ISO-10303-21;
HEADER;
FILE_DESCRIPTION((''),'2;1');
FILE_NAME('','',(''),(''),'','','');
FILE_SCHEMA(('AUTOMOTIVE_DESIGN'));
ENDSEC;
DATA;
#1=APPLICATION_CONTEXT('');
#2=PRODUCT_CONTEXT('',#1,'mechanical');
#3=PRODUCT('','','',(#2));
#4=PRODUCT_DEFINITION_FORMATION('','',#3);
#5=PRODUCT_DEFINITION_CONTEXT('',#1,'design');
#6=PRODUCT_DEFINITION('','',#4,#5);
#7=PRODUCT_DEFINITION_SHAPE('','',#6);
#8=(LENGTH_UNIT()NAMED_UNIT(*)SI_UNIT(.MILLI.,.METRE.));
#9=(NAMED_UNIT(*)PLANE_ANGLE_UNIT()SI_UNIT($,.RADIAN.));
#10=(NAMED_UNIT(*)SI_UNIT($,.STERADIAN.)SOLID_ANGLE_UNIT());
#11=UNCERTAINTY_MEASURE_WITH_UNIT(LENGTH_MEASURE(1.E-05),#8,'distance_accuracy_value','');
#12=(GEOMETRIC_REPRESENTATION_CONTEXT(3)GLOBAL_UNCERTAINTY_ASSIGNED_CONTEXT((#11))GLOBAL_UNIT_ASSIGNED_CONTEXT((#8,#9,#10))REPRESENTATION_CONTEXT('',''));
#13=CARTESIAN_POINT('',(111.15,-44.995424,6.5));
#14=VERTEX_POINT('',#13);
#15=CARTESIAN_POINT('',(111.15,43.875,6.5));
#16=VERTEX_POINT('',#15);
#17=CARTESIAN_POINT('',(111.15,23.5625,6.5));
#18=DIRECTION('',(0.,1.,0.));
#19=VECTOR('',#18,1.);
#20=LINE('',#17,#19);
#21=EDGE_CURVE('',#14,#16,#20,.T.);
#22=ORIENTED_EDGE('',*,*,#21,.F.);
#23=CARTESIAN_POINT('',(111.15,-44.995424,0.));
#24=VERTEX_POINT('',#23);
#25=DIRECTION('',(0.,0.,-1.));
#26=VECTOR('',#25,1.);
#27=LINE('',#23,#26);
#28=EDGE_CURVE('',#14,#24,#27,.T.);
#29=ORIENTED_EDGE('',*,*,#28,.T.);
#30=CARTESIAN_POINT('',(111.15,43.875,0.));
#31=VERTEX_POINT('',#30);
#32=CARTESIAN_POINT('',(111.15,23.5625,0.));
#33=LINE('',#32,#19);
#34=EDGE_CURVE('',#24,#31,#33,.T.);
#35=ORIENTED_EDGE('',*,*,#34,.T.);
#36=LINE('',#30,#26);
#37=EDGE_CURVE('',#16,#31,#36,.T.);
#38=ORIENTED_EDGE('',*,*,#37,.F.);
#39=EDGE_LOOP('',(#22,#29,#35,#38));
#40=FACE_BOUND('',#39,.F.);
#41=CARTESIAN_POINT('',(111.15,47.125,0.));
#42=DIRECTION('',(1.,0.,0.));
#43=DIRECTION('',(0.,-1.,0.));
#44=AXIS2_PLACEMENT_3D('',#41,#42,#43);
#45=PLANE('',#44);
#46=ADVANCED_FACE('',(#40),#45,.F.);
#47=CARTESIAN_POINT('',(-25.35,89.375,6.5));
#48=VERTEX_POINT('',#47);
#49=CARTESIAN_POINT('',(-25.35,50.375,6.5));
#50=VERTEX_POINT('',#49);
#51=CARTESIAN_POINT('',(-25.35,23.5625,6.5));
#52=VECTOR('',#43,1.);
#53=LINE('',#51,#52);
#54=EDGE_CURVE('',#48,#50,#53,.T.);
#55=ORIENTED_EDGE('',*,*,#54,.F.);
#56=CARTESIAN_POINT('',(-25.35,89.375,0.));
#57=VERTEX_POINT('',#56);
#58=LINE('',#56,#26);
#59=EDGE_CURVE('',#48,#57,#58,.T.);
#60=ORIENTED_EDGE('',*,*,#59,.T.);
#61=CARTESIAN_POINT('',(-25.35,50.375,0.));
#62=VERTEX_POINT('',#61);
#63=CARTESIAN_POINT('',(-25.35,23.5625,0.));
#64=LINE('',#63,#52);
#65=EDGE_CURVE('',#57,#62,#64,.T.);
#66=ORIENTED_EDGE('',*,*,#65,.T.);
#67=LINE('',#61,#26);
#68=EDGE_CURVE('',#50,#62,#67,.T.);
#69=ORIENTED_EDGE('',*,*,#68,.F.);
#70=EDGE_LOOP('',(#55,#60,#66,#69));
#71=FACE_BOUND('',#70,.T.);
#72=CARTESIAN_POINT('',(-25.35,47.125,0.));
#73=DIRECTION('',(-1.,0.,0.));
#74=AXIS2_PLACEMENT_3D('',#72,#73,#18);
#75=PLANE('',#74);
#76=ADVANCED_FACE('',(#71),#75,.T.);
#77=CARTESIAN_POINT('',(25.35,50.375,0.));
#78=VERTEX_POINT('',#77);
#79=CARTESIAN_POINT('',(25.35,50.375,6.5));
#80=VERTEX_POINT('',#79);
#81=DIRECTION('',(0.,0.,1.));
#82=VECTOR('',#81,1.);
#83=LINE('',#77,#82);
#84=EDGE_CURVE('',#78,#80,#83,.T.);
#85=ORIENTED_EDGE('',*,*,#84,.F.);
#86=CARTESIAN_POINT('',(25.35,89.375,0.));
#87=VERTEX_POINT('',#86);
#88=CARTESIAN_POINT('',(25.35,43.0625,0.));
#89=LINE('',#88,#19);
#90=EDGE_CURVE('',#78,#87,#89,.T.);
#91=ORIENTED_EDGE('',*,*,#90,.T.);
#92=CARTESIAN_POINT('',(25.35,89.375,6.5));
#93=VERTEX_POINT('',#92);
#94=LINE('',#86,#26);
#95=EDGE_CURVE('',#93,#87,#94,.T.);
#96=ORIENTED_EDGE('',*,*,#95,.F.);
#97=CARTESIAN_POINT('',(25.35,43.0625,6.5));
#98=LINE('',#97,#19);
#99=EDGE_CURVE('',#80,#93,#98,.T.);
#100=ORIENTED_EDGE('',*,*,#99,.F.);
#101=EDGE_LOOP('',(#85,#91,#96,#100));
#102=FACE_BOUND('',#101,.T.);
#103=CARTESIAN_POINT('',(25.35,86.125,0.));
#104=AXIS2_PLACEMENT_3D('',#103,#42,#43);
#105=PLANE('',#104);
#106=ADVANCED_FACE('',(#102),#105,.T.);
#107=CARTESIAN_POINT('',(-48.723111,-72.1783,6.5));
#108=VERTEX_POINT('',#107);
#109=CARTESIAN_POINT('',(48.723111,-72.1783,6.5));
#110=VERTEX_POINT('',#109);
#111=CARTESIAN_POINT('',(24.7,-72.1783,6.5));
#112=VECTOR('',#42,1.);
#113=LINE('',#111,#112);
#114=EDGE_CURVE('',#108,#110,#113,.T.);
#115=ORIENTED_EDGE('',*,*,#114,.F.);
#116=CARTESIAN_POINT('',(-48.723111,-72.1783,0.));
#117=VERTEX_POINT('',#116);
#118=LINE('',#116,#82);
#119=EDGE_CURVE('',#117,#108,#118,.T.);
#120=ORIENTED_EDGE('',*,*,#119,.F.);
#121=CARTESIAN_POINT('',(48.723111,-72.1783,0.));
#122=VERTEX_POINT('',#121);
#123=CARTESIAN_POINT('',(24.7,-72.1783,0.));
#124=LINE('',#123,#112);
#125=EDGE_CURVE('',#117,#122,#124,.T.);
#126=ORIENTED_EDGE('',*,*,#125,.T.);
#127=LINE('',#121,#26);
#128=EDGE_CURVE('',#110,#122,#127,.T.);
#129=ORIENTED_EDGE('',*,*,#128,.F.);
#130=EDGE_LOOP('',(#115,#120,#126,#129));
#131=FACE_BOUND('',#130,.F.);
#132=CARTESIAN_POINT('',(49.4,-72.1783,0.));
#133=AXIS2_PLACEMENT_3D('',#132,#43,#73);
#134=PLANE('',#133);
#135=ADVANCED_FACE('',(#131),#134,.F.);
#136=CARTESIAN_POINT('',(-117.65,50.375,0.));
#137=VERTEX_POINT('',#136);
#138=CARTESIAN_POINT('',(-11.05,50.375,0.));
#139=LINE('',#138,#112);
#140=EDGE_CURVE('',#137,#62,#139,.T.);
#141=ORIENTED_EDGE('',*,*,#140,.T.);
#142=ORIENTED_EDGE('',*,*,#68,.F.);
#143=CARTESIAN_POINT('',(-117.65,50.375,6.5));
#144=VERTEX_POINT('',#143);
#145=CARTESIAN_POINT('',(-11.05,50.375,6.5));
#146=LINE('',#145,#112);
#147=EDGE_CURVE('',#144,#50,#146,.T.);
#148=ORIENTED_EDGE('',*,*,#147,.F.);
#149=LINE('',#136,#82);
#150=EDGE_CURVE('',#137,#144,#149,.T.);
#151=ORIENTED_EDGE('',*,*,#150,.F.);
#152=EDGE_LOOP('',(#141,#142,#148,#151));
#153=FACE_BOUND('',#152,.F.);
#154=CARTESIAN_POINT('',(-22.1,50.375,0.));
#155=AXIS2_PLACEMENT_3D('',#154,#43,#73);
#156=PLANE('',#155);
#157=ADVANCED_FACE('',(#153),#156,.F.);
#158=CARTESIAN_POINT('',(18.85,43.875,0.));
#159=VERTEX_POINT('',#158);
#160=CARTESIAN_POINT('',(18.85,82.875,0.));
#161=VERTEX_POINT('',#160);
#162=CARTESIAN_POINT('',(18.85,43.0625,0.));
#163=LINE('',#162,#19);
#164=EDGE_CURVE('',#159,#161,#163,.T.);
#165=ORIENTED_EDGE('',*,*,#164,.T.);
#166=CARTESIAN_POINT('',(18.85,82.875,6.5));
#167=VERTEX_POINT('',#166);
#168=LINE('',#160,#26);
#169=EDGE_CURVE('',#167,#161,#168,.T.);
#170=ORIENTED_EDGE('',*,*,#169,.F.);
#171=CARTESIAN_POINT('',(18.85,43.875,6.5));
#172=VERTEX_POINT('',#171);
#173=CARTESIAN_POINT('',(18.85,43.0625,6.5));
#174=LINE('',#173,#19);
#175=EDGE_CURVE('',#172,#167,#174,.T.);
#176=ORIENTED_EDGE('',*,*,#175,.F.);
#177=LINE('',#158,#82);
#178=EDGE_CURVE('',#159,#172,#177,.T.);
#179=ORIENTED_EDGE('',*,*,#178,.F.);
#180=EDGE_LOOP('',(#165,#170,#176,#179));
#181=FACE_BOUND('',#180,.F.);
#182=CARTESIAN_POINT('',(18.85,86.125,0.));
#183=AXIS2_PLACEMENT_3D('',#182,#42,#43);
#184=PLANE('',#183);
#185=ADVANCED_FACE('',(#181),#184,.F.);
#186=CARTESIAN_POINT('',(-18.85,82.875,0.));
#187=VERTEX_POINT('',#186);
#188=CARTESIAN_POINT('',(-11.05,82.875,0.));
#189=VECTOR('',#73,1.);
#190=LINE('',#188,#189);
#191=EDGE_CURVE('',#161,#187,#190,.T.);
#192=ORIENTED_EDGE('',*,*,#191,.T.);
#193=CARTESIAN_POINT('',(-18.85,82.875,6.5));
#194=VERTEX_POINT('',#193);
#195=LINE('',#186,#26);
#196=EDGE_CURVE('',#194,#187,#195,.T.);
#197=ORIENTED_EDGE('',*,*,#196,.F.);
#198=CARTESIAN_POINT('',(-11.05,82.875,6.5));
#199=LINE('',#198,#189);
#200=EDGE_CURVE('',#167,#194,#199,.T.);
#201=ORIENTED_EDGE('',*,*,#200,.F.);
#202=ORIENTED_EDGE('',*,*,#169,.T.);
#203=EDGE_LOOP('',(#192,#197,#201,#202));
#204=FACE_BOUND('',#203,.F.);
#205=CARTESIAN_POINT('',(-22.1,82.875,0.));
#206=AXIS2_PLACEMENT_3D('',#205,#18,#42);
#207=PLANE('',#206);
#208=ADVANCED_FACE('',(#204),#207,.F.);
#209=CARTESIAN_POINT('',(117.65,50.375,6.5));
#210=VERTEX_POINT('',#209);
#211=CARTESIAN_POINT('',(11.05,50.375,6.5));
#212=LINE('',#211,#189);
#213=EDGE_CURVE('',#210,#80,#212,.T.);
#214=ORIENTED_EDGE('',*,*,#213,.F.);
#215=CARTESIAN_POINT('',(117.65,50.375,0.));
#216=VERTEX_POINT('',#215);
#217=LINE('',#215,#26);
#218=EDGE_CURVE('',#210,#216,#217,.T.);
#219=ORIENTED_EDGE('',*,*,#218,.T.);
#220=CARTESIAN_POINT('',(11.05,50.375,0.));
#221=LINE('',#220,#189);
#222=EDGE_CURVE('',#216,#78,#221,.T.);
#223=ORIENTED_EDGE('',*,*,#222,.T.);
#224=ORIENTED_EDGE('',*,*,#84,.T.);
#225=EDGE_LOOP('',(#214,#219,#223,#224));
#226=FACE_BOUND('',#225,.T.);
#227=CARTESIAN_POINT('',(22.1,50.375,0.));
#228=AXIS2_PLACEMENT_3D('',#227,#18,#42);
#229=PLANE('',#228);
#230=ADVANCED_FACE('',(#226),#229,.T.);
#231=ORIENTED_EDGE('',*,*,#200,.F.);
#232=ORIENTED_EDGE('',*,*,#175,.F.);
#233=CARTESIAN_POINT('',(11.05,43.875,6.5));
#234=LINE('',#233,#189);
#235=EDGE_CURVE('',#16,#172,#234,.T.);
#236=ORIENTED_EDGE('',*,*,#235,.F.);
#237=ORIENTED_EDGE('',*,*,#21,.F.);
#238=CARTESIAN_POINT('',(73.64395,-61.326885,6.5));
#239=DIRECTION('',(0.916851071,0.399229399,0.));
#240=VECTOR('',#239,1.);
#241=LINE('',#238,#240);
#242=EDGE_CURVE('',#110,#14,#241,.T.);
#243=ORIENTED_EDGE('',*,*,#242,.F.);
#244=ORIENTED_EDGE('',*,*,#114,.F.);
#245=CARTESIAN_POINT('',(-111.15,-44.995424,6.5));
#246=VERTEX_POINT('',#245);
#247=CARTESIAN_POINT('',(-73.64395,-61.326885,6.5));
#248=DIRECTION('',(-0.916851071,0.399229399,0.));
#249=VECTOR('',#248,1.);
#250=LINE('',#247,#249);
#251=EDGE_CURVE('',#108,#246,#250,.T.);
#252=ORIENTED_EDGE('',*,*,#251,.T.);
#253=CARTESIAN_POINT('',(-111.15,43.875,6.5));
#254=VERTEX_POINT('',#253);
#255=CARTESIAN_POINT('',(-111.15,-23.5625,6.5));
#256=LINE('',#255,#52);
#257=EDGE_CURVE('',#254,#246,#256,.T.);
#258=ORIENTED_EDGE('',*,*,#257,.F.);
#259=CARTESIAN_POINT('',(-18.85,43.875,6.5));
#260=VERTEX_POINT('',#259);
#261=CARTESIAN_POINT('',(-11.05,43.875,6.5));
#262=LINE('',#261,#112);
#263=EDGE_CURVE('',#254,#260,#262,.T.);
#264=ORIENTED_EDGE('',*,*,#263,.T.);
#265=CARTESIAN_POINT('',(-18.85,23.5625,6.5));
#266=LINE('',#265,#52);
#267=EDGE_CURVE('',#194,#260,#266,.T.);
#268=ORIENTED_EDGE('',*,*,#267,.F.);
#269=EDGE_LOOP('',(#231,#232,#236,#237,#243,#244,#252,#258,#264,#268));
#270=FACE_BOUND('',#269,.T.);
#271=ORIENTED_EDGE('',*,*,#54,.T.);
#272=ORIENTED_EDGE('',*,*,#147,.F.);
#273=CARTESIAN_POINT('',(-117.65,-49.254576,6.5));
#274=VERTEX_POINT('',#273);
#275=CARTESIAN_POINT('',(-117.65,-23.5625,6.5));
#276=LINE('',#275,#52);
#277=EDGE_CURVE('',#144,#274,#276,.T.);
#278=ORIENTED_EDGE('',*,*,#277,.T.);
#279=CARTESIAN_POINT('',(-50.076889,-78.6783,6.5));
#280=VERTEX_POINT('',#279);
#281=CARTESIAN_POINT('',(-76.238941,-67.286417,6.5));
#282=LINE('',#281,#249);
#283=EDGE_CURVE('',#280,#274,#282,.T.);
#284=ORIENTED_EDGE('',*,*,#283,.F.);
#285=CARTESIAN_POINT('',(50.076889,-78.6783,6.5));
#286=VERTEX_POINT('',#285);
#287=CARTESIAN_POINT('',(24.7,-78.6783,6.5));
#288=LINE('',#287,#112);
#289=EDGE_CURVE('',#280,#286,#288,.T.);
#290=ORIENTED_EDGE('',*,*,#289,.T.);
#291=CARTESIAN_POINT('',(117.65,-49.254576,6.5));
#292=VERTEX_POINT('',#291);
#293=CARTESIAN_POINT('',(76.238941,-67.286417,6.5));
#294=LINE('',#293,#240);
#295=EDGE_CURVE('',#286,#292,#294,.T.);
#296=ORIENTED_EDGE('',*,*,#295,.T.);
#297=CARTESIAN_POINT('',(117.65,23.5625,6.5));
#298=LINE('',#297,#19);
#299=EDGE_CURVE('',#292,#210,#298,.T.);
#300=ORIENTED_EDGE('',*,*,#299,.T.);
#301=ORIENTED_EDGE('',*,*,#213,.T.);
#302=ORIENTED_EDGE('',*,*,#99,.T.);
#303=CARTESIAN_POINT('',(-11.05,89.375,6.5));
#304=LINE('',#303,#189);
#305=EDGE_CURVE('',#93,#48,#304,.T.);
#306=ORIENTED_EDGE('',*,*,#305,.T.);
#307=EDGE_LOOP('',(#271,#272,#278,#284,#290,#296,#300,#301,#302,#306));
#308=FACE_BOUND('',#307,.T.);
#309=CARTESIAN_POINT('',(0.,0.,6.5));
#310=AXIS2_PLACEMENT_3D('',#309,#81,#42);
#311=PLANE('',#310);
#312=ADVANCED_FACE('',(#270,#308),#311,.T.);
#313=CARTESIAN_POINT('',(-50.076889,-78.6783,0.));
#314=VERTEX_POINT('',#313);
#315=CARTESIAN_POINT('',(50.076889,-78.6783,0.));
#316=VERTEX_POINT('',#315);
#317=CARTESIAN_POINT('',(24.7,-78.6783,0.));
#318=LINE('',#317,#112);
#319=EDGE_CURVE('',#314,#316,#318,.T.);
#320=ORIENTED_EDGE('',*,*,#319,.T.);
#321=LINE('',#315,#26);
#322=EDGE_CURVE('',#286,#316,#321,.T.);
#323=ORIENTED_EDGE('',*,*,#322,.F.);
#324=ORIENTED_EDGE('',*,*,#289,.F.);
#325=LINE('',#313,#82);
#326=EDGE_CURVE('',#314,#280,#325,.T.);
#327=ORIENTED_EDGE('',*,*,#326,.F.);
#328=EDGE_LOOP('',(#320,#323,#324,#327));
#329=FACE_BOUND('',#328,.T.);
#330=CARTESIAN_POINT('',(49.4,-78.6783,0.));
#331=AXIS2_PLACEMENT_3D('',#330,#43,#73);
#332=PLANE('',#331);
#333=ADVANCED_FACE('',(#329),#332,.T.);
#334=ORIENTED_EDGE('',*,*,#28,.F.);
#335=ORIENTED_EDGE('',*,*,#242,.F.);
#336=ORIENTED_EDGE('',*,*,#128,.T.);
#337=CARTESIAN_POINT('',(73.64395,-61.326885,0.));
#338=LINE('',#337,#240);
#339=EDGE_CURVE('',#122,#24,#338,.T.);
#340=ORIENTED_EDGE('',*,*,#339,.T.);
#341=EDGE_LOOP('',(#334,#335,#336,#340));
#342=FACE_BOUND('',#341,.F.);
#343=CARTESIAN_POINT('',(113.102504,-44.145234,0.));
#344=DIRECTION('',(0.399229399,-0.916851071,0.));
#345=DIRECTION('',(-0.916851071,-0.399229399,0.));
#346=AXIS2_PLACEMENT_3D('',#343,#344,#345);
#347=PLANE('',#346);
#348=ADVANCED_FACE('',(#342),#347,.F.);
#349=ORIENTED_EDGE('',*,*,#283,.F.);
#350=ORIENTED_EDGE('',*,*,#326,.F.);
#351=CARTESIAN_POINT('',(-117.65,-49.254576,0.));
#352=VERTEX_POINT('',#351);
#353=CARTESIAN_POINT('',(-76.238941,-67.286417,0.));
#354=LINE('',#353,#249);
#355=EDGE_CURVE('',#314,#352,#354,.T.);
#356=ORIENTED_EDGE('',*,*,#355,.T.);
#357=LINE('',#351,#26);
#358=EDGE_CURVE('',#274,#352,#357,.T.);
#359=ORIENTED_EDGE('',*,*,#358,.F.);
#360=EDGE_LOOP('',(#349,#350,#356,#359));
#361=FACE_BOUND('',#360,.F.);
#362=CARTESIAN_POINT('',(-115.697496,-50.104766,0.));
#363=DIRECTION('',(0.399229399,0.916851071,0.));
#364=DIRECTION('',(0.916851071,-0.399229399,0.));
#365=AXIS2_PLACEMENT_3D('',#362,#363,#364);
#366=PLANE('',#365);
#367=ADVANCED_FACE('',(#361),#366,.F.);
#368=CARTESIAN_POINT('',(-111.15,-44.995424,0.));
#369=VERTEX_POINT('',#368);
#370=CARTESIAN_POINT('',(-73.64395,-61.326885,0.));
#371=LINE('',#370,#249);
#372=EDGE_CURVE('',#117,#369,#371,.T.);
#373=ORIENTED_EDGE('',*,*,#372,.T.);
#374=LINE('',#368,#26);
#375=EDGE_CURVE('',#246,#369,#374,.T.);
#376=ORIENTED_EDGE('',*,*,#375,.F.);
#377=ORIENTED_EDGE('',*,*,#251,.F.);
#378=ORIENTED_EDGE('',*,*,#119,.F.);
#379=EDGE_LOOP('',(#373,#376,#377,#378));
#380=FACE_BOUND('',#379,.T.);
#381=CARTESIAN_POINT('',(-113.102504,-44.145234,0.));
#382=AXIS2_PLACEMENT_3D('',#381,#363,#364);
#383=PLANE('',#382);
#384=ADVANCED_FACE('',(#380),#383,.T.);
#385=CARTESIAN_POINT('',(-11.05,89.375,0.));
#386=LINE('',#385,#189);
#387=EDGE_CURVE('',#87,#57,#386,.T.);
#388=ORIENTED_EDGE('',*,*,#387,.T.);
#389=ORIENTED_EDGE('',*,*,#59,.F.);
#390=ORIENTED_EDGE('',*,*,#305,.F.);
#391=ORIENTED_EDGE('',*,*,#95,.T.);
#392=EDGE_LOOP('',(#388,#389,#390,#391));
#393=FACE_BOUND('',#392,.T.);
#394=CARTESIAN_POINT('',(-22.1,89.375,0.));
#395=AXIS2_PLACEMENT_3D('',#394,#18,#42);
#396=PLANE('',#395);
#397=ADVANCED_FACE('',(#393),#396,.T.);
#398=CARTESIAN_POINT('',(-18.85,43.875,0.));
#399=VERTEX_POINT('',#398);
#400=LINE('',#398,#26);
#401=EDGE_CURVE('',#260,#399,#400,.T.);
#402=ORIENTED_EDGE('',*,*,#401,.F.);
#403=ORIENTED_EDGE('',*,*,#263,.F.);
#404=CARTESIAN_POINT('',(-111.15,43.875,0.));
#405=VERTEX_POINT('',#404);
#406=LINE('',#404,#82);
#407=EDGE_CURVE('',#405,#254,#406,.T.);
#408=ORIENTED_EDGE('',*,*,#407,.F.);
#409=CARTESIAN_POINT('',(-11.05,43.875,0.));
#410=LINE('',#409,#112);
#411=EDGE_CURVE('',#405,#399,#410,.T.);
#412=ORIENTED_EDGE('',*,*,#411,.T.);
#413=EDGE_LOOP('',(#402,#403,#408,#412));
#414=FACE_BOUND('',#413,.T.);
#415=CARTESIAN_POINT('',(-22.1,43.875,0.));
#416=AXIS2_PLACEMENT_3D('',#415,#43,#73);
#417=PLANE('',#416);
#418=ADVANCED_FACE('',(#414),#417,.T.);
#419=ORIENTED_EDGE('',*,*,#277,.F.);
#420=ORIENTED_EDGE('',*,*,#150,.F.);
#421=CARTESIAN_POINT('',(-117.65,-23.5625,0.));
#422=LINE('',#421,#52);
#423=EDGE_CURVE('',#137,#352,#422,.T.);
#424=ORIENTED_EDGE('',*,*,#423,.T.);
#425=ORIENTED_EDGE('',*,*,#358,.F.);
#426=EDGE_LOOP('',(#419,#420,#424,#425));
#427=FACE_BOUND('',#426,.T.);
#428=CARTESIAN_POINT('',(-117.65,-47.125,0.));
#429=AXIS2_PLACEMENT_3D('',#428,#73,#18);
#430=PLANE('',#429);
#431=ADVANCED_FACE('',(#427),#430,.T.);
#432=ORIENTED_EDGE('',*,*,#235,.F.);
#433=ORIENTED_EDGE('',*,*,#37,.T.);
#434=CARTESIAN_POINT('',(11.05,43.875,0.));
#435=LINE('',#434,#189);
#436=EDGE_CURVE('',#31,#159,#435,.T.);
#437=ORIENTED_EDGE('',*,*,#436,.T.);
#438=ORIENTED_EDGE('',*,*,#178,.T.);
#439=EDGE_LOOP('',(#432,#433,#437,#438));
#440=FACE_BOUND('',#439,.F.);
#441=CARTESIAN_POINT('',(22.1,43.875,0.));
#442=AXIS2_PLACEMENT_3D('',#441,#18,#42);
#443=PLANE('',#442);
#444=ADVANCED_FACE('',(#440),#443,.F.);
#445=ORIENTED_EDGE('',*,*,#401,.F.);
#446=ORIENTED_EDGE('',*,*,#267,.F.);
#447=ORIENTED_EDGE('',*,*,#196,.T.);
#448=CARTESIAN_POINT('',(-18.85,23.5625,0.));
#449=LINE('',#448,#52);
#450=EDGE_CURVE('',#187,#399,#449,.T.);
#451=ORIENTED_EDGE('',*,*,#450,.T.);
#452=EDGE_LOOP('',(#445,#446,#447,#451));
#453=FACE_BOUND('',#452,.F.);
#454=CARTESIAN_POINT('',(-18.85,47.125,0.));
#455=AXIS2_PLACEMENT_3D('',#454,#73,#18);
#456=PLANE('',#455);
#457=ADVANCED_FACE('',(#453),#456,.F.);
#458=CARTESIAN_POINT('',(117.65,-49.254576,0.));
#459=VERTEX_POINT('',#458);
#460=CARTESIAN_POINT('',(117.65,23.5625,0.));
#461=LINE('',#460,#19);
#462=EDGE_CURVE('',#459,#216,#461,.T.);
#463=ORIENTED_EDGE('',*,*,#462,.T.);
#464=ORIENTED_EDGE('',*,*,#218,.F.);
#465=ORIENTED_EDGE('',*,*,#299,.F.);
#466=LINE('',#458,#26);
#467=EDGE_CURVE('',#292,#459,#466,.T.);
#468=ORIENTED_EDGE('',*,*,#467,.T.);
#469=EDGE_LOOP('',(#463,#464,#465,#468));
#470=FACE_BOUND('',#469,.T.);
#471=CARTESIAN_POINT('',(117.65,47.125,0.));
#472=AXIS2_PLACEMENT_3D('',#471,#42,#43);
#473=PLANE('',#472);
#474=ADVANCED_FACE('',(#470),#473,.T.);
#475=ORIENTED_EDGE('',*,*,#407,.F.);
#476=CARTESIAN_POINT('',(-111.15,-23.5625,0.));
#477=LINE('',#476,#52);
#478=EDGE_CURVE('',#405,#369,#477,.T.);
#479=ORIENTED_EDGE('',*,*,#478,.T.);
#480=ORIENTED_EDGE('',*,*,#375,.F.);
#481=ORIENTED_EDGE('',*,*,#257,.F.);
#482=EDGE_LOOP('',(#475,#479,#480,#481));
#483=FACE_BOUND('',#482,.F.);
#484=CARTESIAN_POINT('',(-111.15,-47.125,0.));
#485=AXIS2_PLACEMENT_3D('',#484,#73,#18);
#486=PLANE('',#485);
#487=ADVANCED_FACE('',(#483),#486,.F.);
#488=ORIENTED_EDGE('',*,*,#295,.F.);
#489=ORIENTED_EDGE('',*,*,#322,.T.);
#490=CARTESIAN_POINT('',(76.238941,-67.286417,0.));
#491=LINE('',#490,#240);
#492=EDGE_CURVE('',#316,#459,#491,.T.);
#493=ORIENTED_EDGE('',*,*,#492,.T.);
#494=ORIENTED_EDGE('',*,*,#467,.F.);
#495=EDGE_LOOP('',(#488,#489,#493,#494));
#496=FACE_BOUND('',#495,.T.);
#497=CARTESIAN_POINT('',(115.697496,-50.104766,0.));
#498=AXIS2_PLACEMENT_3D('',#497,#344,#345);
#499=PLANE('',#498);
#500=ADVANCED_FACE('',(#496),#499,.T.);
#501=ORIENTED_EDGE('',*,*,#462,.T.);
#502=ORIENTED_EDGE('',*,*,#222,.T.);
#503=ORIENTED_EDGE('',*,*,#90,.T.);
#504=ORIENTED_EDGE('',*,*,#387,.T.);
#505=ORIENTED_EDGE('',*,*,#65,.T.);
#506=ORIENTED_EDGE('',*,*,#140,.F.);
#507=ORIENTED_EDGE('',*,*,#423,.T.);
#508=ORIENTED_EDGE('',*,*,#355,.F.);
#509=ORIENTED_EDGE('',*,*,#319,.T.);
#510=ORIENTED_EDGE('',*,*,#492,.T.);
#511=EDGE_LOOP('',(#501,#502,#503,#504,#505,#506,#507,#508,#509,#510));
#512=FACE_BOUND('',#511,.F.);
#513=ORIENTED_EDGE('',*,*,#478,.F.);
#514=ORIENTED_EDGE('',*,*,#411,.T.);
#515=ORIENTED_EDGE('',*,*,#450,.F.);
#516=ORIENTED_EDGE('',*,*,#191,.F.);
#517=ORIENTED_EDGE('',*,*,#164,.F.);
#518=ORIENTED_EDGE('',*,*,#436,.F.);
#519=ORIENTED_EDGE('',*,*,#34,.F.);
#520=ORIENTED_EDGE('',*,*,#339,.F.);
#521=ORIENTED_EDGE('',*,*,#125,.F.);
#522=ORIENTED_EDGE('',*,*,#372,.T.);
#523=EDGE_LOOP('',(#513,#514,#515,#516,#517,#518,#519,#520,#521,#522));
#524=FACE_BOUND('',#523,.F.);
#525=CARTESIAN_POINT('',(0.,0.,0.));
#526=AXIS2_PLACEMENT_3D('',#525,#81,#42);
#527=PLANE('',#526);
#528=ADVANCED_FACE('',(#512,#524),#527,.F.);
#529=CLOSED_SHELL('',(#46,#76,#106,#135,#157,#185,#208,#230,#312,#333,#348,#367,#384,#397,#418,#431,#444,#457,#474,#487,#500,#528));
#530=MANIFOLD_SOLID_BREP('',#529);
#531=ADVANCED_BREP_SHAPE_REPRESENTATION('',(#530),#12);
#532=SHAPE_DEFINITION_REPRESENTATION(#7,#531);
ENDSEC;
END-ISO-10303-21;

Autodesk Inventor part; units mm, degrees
ref_plane "YZ Plane" through (0, 0, 0) normal (1, 0, 0) x (0, 1, 0)
ref_plane "XZ Plane" through (0, 0, 0) normal (0, 1, 0) x (-1, 0, 0)
ref_plane "XY Plane" through (0, 0, 0) normal (0, 0, 1) x (1, 0, 0)
sketch "Sketch1" plane through (0, 0, 0) normal (0, 0, 1) x (1, 0, 0)
  line L0 (-107.9, 41.925) -> (107.9, -41.925) construction
  line L1 (107.9, 41.925) -> (-107.9, -41.925) construction
  line L2 (-114.4, -47.125) -> (-114.4, 47.125)
  line L3 (114.4, 47.125) -> (114.4, -47.125)
  line L4 (114.4, -47.125) -> (-114.4, 47.125) construction
  line L5 (-114.4, -47.125) -> (114.4, 47.125) construction
  line L6 (-22.1, 47.125) -> (-22.1, 86.125)
  line L7 (-22.1, 86.125) -> (22.1, 86.125)
  line L8 (22.1, 86.125) -> (22.1, 47.125)
  line L9 (22.1, 47.125) -> (114.4, 47.125)
  line L10 (-22.1, 47.125) -> (-114.4, 47.125)
  line L11 (114.4, -47.125) -> (49.4, -75.4283)
  line L12 (-114.4, -47.125) -> (-49.4, -75.4283)
  line L13 (49.4, -75.4283) -> (-49.4, -75.4283)
  point P0 (0, 0)
  point P1 (0, 0)
  point P2 (0, 80.925)
  point P3 (0, 0)
  point P4 (0, 86.125)
  point P5 (0, 0)
  dimension "Comp" = 215.8
  dimension "Lar" = 83.85
  dimension "d10" = 215.8
  dimension "LarMaior" = 94.25
  dimension "CompMaior" = 228.8
  dimension "d20" = 39
  dimension "d21" = 44.2
  dimension "d25" = 65
  dimension "d27" = 65
  dimension "d28" = 98.8
extrude "Extrusion1" add sketch "Sketch1" along normal blind 6.5
shell "Shell1" thickness 6.5 both sides yes removed faces 2 at (-7.3667, -34.5772, 6.5) at (-7.3667, -34.5772, 0)
properties part number "Buste2"
